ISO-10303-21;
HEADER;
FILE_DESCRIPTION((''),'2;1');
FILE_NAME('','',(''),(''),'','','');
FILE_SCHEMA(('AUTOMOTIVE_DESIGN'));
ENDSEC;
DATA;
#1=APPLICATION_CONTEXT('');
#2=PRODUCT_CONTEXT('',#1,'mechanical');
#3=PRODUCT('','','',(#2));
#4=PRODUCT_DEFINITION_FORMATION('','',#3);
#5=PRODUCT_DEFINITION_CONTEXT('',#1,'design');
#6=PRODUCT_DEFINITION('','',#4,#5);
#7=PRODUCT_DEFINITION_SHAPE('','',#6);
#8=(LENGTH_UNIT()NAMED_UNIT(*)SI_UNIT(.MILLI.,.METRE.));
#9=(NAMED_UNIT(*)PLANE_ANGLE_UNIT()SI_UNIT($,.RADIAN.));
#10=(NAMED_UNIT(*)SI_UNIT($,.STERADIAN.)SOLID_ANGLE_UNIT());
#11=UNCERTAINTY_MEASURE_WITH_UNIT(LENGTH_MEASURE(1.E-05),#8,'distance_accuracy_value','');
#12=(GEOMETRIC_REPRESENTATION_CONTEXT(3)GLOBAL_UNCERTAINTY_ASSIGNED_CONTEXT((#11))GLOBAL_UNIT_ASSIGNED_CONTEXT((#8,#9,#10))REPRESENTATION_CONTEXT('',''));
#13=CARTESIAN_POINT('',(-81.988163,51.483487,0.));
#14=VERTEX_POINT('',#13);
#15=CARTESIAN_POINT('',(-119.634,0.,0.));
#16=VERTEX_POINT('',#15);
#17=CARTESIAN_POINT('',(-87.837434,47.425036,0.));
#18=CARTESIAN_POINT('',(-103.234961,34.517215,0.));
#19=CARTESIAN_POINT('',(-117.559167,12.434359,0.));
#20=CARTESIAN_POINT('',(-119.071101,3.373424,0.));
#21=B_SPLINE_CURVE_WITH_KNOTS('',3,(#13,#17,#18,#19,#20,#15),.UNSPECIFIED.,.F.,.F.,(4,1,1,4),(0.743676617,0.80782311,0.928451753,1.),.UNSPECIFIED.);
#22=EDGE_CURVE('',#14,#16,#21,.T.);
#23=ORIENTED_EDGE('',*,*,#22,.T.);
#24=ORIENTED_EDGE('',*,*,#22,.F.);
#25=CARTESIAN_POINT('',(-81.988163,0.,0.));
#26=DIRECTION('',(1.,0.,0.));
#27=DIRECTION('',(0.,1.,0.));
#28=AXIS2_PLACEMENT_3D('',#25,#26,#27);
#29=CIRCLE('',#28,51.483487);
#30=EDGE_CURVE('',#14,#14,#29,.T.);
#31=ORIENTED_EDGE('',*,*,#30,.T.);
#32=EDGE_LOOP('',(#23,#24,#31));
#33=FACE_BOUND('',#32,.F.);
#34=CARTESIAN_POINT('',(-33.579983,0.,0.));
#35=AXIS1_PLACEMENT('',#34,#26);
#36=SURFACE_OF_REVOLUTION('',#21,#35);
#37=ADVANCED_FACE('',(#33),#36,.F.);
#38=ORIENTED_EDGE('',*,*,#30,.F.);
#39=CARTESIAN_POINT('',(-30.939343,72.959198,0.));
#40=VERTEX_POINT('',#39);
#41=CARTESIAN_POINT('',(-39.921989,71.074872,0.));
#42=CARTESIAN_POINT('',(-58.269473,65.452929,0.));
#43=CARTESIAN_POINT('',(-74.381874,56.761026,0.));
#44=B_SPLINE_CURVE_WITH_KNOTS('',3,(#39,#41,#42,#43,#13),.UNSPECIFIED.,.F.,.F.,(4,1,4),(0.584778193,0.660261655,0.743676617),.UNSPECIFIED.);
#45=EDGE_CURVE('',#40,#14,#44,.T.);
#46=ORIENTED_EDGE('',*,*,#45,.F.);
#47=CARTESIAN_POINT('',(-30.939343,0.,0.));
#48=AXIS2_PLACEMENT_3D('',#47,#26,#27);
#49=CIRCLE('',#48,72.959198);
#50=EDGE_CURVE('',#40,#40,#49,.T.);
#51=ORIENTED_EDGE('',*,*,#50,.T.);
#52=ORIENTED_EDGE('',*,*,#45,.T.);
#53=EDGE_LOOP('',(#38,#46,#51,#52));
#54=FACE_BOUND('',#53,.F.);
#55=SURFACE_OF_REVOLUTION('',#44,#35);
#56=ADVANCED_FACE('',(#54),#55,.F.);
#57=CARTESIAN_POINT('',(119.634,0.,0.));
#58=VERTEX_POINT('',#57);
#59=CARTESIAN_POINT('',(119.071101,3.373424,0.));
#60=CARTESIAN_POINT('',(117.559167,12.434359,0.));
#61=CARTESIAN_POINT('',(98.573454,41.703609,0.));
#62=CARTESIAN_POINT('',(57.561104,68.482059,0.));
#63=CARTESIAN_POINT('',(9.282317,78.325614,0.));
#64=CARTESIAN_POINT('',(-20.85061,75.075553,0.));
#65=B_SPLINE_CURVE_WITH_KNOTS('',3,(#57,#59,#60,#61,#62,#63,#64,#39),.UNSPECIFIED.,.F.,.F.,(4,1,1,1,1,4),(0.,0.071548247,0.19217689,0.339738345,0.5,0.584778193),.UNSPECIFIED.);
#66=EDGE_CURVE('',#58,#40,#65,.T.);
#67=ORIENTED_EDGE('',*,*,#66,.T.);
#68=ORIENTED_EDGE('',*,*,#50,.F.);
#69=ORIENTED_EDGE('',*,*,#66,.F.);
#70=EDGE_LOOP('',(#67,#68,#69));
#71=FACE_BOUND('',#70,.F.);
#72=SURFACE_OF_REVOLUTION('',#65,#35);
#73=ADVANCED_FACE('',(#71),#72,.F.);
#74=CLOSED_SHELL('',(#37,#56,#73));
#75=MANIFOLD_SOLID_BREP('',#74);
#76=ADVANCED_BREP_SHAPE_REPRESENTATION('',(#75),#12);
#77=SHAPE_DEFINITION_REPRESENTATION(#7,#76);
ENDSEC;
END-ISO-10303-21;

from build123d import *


with BuildPart() as f1:
    # F0 (on Top) → F1 (revolve)
    with BuildSketch(Plane.XY):
        with BuildLine():
            add(Edge.make_bspline(
                [(-81.9881628618, 51.4834874052), (-87.8374344249, 47.4250360241), (-103.2349607209, 34.5172153184), (-117.5591673418, 12.4343589375), (-119.0711009096, 3.3734235422), (-119.634, 0)],
                knots=[0.7436766169, 0.7436766169, 0.7436766169, 0.7436766169, 0.8078231103, 0.928451753, 1, 1, 1, 1], degree=3))
            Line((-119.634, 0), (-46.3161534692, 0))
            ThreePointArc((-46.3161534692, 0), (-77.6332482946, 16.4009317657), (-81.9881628618, 51.4834874052))
        make_face()
        with BuildLine():
            ThreePointArc((-8.2161533182, 38.1), (-19.3753850084, 11.1592315834), (-46.3161534692, 0))
            Line((-46.3161534692, 0), (119.634, 0))
            add(Edge.make_bspline(
                [(119.634, 0), (119.0711009096, 3.3734235422), (117.5591673418, 12.4343589375), (98.573454101, 41.7036085289), (57.5611036651, 68.4820593391), (9.2823174411, 78.3256138413), (-20.8506096484, 75.0755532283), (-30.9393429568, 72.9591982568)],
                knots=[0, 0, 0, 0, 0.071548247, 0.1921768897, 0.3397383448, 0.5, 0.5847781931, 0.5847781931, 0.5847781931, 0.5847781931], degree=3))
            ThreePointArc((-30.9393429568, 72.9591982568), (-14.3985525722, 58.9056906305), (-8.2161533182, 38.1))
        make_face()
        with BuildLine():
            ThreePointArc((-81.9881628618, 51.4834874052), (-77.6332482946, 16.4009317657), (-46.3161534692, 0))
            ThreePointArc((-46.3161534692, 0), (-19.3753850084, 11.1592315834), (-8.2161533182, 38.1))
            ThreePointArc((-8.2161533182, 38.1), (-14.3985525722, 58.9056906305), (-30.9393429568, 72.9591982568))
            add(Edge.make_bspline(
                [(-30.9393429568, 72.9591982568), (-39.9219891935, 71.0748717077), (-58.2694731501, 65.4529293108), (-74.3818739183, 56.7610255626), (-81.9881628618, 51.4834874052)],
                knots=[0.5847781931, 0.5847781931, 0.5847781931, 0.5847781931, 0.6602616552, 0.7436766169, 0.7436766169, 0.7436766169, 0.7436766169], degree=3))
        make_face()
    revolve(axis=Axis((-33.5799832898, 0, 0), (1, 0, 0)))


solid = f1.part
